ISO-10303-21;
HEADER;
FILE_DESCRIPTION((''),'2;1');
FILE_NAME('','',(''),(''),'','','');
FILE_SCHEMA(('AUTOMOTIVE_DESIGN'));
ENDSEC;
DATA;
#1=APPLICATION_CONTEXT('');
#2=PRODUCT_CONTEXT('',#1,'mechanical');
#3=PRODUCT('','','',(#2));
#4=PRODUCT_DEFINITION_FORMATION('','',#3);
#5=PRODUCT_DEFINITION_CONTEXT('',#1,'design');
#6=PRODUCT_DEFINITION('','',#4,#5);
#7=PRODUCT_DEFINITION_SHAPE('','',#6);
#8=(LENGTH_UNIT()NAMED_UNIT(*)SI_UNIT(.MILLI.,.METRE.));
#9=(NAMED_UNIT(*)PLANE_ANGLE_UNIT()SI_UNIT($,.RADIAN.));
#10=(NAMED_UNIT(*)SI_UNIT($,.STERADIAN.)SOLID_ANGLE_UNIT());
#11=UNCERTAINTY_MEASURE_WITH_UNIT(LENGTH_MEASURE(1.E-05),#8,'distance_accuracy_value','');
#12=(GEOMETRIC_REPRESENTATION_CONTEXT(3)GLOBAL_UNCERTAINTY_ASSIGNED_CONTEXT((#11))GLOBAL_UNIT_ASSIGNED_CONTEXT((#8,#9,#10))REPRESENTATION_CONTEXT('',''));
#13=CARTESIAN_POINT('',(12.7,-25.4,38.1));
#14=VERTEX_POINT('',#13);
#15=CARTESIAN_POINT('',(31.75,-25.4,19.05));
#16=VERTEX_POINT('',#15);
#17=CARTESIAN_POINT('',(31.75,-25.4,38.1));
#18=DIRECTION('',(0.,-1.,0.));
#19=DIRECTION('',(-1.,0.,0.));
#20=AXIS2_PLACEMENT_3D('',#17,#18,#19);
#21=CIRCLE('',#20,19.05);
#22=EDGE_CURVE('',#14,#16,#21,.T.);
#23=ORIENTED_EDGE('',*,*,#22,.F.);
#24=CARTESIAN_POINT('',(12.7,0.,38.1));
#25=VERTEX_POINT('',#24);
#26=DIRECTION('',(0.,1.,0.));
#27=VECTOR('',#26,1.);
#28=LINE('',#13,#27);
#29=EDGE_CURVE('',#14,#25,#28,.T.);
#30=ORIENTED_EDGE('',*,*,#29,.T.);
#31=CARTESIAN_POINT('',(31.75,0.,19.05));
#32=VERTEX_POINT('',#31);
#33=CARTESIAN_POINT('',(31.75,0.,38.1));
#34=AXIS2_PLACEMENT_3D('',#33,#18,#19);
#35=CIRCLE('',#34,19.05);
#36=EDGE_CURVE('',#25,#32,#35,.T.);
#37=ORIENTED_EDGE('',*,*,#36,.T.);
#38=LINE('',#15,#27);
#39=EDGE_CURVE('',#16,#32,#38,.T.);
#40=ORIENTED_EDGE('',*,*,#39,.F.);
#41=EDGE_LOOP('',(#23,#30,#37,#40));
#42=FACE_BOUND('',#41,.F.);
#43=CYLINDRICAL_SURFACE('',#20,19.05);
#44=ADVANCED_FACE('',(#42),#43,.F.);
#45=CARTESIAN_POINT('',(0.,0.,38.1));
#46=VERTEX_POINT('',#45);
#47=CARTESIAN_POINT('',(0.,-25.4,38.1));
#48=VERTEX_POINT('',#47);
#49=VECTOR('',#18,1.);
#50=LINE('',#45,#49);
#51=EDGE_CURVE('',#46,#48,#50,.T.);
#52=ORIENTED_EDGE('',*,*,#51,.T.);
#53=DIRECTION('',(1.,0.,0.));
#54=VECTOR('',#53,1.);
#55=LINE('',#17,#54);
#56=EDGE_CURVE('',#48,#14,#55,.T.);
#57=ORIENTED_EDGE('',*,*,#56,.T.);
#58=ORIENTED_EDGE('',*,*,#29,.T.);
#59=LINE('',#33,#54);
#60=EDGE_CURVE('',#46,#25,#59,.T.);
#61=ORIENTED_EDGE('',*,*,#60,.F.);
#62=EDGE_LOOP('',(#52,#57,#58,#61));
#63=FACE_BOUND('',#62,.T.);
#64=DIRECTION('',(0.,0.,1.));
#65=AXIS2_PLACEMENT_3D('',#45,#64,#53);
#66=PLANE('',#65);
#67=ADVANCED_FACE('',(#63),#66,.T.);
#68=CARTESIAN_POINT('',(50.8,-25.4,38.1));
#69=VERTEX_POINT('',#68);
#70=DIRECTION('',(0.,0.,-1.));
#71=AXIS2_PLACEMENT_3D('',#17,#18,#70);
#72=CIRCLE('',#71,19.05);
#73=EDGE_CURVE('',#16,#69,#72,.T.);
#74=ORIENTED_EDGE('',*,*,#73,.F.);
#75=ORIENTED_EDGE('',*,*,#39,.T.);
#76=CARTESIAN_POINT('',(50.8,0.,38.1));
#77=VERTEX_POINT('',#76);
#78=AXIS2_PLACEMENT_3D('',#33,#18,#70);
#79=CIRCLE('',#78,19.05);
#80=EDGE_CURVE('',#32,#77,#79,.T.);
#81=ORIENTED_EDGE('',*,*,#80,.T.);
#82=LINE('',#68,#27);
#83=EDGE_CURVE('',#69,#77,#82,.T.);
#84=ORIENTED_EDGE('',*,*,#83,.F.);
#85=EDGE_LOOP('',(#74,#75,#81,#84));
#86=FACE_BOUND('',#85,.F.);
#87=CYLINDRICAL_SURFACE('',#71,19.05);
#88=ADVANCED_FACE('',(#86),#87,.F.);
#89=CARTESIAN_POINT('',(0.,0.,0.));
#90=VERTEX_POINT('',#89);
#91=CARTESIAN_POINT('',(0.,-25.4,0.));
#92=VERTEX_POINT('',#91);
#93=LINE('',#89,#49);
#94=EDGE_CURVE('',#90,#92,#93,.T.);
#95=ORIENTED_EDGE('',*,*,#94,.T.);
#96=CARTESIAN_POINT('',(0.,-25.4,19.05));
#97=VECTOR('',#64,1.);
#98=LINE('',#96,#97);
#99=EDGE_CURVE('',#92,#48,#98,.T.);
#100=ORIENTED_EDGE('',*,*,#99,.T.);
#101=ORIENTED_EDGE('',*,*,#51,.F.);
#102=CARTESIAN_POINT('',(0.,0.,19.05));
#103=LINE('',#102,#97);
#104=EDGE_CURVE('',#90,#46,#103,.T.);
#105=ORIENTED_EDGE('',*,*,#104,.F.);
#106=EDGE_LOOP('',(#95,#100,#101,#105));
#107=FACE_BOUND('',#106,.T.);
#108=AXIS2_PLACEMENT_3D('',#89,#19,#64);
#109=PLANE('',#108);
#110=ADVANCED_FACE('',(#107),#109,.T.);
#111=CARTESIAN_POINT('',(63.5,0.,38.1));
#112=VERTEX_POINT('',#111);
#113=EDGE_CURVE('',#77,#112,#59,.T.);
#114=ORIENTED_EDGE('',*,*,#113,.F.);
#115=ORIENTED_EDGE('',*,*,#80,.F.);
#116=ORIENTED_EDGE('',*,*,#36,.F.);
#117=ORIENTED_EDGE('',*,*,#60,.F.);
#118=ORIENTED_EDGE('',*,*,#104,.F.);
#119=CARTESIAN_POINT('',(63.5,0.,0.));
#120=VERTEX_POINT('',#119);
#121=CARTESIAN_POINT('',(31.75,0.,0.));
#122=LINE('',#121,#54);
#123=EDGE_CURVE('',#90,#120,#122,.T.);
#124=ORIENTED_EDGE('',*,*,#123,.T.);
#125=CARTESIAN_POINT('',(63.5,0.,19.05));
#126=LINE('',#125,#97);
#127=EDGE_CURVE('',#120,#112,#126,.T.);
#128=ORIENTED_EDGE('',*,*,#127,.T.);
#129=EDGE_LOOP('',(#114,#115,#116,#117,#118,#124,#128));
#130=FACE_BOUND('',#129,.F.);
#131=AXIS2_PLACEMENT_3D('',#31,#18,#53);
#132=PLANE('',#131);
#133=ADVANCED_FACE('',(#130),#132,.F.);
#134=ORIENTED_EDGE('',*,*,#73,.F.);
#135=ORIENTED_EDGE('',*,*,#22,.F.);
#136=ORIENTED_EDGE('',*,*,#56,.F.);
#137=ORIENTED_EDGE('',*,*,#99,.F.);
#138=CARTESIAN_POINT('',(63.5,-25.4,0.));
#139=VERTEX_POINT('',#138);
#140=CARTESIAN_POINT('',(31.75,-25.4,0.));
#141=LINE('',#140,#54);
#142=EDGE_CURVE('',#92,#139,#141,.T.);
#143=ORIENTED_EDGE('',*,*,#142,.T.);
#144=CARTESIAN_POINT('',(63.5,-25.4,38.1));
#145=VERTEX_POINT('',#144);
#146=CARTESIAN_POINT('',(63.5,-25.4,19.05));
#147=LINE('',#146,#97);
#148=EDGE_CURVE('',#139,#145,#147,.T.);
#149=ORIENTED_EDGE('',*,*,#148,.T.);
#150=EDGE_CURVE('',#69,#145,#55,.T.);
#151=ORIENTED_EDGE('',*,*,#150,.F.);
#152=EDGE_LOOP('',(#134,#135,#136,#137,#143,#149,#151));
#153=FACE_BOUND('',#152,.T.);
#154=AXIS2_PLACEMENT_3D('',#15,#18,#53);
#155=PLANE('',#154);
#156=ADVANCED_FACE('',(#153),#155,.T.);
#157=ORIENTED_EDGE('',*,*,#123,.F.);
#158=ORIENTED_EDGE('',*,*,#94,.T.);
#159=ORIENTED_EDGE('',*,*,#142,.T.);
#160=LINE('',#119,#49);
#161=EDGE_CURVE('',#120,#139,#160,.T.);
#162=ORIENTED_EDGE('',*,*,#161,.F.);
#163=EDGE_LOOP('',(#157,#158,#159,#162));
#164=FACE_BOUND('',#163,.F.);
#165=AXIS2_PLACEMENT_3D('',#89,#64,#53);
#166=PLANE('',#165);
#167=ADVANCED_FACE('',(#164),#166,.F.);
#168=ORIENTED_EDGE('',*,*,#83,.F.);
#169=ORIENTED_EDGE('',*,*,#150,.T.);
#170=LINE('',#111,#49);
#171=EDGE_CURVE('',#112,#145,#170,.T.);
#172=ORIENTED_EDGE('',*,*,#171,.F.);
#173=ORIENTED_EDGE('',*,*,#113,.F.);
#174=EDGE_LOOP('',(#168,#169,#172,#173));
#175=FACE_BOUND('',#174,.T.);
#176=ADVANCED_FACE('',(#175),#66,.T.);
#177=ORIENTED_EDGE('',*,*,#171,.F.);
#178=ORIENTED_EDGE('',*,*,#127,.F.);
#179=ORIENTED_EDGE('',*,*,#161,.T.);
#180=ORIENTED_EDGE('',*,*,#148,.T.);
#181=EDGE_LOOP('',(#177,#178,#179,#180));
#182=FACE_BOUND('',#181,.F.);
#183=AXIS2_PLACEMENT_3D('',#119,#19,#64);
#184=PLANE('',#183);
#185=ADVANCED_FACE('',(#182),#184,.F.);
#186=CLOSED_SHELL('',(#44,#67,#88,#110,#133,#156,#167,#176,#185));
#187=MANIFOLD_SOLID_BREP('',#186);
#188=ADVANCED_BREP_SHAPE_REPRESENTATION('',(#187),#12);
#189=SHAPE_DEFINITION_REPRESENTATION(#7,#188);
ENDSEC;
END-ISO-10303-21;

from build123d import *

# Parameters (mm, degrees)
F0_W     = 63.5
F0_H     = 38.1
F1_DEPTH = 25.4
F3_DEPTH = 25.4


with BuildPart() as f1:
    # F0 (on Front) → F1 (new body)
    with BuildSketch(Plane.XZ):
        with Locations((31.75, 19.05)):
            Rectangle(F0_W, F0_H)
    extrude(amount=F1_DEPTH)

    # F2 (on face) → F3 (cut)
    with BuildSketch(Plane.XZ.offset(25.4)):
        with BuildLine():
            Line((49.2131151259, 38.1), (12.7, 38.1))
            ThreePointArc((12.7, 38.1), (18.2796158184, 24.6296158184), (31.75, 19.05))
            ThreePointArc((31.75, 19.05), (45.2203841816, 24.6296158184), (50.8, 38.1))
            Line((50.8, 38.1), (49.2131151259, 38.1))
        make_face()
    extrude(amount=-F3_DEPTH, mode=Mode.SUBTRACT)


solid = f1.part
